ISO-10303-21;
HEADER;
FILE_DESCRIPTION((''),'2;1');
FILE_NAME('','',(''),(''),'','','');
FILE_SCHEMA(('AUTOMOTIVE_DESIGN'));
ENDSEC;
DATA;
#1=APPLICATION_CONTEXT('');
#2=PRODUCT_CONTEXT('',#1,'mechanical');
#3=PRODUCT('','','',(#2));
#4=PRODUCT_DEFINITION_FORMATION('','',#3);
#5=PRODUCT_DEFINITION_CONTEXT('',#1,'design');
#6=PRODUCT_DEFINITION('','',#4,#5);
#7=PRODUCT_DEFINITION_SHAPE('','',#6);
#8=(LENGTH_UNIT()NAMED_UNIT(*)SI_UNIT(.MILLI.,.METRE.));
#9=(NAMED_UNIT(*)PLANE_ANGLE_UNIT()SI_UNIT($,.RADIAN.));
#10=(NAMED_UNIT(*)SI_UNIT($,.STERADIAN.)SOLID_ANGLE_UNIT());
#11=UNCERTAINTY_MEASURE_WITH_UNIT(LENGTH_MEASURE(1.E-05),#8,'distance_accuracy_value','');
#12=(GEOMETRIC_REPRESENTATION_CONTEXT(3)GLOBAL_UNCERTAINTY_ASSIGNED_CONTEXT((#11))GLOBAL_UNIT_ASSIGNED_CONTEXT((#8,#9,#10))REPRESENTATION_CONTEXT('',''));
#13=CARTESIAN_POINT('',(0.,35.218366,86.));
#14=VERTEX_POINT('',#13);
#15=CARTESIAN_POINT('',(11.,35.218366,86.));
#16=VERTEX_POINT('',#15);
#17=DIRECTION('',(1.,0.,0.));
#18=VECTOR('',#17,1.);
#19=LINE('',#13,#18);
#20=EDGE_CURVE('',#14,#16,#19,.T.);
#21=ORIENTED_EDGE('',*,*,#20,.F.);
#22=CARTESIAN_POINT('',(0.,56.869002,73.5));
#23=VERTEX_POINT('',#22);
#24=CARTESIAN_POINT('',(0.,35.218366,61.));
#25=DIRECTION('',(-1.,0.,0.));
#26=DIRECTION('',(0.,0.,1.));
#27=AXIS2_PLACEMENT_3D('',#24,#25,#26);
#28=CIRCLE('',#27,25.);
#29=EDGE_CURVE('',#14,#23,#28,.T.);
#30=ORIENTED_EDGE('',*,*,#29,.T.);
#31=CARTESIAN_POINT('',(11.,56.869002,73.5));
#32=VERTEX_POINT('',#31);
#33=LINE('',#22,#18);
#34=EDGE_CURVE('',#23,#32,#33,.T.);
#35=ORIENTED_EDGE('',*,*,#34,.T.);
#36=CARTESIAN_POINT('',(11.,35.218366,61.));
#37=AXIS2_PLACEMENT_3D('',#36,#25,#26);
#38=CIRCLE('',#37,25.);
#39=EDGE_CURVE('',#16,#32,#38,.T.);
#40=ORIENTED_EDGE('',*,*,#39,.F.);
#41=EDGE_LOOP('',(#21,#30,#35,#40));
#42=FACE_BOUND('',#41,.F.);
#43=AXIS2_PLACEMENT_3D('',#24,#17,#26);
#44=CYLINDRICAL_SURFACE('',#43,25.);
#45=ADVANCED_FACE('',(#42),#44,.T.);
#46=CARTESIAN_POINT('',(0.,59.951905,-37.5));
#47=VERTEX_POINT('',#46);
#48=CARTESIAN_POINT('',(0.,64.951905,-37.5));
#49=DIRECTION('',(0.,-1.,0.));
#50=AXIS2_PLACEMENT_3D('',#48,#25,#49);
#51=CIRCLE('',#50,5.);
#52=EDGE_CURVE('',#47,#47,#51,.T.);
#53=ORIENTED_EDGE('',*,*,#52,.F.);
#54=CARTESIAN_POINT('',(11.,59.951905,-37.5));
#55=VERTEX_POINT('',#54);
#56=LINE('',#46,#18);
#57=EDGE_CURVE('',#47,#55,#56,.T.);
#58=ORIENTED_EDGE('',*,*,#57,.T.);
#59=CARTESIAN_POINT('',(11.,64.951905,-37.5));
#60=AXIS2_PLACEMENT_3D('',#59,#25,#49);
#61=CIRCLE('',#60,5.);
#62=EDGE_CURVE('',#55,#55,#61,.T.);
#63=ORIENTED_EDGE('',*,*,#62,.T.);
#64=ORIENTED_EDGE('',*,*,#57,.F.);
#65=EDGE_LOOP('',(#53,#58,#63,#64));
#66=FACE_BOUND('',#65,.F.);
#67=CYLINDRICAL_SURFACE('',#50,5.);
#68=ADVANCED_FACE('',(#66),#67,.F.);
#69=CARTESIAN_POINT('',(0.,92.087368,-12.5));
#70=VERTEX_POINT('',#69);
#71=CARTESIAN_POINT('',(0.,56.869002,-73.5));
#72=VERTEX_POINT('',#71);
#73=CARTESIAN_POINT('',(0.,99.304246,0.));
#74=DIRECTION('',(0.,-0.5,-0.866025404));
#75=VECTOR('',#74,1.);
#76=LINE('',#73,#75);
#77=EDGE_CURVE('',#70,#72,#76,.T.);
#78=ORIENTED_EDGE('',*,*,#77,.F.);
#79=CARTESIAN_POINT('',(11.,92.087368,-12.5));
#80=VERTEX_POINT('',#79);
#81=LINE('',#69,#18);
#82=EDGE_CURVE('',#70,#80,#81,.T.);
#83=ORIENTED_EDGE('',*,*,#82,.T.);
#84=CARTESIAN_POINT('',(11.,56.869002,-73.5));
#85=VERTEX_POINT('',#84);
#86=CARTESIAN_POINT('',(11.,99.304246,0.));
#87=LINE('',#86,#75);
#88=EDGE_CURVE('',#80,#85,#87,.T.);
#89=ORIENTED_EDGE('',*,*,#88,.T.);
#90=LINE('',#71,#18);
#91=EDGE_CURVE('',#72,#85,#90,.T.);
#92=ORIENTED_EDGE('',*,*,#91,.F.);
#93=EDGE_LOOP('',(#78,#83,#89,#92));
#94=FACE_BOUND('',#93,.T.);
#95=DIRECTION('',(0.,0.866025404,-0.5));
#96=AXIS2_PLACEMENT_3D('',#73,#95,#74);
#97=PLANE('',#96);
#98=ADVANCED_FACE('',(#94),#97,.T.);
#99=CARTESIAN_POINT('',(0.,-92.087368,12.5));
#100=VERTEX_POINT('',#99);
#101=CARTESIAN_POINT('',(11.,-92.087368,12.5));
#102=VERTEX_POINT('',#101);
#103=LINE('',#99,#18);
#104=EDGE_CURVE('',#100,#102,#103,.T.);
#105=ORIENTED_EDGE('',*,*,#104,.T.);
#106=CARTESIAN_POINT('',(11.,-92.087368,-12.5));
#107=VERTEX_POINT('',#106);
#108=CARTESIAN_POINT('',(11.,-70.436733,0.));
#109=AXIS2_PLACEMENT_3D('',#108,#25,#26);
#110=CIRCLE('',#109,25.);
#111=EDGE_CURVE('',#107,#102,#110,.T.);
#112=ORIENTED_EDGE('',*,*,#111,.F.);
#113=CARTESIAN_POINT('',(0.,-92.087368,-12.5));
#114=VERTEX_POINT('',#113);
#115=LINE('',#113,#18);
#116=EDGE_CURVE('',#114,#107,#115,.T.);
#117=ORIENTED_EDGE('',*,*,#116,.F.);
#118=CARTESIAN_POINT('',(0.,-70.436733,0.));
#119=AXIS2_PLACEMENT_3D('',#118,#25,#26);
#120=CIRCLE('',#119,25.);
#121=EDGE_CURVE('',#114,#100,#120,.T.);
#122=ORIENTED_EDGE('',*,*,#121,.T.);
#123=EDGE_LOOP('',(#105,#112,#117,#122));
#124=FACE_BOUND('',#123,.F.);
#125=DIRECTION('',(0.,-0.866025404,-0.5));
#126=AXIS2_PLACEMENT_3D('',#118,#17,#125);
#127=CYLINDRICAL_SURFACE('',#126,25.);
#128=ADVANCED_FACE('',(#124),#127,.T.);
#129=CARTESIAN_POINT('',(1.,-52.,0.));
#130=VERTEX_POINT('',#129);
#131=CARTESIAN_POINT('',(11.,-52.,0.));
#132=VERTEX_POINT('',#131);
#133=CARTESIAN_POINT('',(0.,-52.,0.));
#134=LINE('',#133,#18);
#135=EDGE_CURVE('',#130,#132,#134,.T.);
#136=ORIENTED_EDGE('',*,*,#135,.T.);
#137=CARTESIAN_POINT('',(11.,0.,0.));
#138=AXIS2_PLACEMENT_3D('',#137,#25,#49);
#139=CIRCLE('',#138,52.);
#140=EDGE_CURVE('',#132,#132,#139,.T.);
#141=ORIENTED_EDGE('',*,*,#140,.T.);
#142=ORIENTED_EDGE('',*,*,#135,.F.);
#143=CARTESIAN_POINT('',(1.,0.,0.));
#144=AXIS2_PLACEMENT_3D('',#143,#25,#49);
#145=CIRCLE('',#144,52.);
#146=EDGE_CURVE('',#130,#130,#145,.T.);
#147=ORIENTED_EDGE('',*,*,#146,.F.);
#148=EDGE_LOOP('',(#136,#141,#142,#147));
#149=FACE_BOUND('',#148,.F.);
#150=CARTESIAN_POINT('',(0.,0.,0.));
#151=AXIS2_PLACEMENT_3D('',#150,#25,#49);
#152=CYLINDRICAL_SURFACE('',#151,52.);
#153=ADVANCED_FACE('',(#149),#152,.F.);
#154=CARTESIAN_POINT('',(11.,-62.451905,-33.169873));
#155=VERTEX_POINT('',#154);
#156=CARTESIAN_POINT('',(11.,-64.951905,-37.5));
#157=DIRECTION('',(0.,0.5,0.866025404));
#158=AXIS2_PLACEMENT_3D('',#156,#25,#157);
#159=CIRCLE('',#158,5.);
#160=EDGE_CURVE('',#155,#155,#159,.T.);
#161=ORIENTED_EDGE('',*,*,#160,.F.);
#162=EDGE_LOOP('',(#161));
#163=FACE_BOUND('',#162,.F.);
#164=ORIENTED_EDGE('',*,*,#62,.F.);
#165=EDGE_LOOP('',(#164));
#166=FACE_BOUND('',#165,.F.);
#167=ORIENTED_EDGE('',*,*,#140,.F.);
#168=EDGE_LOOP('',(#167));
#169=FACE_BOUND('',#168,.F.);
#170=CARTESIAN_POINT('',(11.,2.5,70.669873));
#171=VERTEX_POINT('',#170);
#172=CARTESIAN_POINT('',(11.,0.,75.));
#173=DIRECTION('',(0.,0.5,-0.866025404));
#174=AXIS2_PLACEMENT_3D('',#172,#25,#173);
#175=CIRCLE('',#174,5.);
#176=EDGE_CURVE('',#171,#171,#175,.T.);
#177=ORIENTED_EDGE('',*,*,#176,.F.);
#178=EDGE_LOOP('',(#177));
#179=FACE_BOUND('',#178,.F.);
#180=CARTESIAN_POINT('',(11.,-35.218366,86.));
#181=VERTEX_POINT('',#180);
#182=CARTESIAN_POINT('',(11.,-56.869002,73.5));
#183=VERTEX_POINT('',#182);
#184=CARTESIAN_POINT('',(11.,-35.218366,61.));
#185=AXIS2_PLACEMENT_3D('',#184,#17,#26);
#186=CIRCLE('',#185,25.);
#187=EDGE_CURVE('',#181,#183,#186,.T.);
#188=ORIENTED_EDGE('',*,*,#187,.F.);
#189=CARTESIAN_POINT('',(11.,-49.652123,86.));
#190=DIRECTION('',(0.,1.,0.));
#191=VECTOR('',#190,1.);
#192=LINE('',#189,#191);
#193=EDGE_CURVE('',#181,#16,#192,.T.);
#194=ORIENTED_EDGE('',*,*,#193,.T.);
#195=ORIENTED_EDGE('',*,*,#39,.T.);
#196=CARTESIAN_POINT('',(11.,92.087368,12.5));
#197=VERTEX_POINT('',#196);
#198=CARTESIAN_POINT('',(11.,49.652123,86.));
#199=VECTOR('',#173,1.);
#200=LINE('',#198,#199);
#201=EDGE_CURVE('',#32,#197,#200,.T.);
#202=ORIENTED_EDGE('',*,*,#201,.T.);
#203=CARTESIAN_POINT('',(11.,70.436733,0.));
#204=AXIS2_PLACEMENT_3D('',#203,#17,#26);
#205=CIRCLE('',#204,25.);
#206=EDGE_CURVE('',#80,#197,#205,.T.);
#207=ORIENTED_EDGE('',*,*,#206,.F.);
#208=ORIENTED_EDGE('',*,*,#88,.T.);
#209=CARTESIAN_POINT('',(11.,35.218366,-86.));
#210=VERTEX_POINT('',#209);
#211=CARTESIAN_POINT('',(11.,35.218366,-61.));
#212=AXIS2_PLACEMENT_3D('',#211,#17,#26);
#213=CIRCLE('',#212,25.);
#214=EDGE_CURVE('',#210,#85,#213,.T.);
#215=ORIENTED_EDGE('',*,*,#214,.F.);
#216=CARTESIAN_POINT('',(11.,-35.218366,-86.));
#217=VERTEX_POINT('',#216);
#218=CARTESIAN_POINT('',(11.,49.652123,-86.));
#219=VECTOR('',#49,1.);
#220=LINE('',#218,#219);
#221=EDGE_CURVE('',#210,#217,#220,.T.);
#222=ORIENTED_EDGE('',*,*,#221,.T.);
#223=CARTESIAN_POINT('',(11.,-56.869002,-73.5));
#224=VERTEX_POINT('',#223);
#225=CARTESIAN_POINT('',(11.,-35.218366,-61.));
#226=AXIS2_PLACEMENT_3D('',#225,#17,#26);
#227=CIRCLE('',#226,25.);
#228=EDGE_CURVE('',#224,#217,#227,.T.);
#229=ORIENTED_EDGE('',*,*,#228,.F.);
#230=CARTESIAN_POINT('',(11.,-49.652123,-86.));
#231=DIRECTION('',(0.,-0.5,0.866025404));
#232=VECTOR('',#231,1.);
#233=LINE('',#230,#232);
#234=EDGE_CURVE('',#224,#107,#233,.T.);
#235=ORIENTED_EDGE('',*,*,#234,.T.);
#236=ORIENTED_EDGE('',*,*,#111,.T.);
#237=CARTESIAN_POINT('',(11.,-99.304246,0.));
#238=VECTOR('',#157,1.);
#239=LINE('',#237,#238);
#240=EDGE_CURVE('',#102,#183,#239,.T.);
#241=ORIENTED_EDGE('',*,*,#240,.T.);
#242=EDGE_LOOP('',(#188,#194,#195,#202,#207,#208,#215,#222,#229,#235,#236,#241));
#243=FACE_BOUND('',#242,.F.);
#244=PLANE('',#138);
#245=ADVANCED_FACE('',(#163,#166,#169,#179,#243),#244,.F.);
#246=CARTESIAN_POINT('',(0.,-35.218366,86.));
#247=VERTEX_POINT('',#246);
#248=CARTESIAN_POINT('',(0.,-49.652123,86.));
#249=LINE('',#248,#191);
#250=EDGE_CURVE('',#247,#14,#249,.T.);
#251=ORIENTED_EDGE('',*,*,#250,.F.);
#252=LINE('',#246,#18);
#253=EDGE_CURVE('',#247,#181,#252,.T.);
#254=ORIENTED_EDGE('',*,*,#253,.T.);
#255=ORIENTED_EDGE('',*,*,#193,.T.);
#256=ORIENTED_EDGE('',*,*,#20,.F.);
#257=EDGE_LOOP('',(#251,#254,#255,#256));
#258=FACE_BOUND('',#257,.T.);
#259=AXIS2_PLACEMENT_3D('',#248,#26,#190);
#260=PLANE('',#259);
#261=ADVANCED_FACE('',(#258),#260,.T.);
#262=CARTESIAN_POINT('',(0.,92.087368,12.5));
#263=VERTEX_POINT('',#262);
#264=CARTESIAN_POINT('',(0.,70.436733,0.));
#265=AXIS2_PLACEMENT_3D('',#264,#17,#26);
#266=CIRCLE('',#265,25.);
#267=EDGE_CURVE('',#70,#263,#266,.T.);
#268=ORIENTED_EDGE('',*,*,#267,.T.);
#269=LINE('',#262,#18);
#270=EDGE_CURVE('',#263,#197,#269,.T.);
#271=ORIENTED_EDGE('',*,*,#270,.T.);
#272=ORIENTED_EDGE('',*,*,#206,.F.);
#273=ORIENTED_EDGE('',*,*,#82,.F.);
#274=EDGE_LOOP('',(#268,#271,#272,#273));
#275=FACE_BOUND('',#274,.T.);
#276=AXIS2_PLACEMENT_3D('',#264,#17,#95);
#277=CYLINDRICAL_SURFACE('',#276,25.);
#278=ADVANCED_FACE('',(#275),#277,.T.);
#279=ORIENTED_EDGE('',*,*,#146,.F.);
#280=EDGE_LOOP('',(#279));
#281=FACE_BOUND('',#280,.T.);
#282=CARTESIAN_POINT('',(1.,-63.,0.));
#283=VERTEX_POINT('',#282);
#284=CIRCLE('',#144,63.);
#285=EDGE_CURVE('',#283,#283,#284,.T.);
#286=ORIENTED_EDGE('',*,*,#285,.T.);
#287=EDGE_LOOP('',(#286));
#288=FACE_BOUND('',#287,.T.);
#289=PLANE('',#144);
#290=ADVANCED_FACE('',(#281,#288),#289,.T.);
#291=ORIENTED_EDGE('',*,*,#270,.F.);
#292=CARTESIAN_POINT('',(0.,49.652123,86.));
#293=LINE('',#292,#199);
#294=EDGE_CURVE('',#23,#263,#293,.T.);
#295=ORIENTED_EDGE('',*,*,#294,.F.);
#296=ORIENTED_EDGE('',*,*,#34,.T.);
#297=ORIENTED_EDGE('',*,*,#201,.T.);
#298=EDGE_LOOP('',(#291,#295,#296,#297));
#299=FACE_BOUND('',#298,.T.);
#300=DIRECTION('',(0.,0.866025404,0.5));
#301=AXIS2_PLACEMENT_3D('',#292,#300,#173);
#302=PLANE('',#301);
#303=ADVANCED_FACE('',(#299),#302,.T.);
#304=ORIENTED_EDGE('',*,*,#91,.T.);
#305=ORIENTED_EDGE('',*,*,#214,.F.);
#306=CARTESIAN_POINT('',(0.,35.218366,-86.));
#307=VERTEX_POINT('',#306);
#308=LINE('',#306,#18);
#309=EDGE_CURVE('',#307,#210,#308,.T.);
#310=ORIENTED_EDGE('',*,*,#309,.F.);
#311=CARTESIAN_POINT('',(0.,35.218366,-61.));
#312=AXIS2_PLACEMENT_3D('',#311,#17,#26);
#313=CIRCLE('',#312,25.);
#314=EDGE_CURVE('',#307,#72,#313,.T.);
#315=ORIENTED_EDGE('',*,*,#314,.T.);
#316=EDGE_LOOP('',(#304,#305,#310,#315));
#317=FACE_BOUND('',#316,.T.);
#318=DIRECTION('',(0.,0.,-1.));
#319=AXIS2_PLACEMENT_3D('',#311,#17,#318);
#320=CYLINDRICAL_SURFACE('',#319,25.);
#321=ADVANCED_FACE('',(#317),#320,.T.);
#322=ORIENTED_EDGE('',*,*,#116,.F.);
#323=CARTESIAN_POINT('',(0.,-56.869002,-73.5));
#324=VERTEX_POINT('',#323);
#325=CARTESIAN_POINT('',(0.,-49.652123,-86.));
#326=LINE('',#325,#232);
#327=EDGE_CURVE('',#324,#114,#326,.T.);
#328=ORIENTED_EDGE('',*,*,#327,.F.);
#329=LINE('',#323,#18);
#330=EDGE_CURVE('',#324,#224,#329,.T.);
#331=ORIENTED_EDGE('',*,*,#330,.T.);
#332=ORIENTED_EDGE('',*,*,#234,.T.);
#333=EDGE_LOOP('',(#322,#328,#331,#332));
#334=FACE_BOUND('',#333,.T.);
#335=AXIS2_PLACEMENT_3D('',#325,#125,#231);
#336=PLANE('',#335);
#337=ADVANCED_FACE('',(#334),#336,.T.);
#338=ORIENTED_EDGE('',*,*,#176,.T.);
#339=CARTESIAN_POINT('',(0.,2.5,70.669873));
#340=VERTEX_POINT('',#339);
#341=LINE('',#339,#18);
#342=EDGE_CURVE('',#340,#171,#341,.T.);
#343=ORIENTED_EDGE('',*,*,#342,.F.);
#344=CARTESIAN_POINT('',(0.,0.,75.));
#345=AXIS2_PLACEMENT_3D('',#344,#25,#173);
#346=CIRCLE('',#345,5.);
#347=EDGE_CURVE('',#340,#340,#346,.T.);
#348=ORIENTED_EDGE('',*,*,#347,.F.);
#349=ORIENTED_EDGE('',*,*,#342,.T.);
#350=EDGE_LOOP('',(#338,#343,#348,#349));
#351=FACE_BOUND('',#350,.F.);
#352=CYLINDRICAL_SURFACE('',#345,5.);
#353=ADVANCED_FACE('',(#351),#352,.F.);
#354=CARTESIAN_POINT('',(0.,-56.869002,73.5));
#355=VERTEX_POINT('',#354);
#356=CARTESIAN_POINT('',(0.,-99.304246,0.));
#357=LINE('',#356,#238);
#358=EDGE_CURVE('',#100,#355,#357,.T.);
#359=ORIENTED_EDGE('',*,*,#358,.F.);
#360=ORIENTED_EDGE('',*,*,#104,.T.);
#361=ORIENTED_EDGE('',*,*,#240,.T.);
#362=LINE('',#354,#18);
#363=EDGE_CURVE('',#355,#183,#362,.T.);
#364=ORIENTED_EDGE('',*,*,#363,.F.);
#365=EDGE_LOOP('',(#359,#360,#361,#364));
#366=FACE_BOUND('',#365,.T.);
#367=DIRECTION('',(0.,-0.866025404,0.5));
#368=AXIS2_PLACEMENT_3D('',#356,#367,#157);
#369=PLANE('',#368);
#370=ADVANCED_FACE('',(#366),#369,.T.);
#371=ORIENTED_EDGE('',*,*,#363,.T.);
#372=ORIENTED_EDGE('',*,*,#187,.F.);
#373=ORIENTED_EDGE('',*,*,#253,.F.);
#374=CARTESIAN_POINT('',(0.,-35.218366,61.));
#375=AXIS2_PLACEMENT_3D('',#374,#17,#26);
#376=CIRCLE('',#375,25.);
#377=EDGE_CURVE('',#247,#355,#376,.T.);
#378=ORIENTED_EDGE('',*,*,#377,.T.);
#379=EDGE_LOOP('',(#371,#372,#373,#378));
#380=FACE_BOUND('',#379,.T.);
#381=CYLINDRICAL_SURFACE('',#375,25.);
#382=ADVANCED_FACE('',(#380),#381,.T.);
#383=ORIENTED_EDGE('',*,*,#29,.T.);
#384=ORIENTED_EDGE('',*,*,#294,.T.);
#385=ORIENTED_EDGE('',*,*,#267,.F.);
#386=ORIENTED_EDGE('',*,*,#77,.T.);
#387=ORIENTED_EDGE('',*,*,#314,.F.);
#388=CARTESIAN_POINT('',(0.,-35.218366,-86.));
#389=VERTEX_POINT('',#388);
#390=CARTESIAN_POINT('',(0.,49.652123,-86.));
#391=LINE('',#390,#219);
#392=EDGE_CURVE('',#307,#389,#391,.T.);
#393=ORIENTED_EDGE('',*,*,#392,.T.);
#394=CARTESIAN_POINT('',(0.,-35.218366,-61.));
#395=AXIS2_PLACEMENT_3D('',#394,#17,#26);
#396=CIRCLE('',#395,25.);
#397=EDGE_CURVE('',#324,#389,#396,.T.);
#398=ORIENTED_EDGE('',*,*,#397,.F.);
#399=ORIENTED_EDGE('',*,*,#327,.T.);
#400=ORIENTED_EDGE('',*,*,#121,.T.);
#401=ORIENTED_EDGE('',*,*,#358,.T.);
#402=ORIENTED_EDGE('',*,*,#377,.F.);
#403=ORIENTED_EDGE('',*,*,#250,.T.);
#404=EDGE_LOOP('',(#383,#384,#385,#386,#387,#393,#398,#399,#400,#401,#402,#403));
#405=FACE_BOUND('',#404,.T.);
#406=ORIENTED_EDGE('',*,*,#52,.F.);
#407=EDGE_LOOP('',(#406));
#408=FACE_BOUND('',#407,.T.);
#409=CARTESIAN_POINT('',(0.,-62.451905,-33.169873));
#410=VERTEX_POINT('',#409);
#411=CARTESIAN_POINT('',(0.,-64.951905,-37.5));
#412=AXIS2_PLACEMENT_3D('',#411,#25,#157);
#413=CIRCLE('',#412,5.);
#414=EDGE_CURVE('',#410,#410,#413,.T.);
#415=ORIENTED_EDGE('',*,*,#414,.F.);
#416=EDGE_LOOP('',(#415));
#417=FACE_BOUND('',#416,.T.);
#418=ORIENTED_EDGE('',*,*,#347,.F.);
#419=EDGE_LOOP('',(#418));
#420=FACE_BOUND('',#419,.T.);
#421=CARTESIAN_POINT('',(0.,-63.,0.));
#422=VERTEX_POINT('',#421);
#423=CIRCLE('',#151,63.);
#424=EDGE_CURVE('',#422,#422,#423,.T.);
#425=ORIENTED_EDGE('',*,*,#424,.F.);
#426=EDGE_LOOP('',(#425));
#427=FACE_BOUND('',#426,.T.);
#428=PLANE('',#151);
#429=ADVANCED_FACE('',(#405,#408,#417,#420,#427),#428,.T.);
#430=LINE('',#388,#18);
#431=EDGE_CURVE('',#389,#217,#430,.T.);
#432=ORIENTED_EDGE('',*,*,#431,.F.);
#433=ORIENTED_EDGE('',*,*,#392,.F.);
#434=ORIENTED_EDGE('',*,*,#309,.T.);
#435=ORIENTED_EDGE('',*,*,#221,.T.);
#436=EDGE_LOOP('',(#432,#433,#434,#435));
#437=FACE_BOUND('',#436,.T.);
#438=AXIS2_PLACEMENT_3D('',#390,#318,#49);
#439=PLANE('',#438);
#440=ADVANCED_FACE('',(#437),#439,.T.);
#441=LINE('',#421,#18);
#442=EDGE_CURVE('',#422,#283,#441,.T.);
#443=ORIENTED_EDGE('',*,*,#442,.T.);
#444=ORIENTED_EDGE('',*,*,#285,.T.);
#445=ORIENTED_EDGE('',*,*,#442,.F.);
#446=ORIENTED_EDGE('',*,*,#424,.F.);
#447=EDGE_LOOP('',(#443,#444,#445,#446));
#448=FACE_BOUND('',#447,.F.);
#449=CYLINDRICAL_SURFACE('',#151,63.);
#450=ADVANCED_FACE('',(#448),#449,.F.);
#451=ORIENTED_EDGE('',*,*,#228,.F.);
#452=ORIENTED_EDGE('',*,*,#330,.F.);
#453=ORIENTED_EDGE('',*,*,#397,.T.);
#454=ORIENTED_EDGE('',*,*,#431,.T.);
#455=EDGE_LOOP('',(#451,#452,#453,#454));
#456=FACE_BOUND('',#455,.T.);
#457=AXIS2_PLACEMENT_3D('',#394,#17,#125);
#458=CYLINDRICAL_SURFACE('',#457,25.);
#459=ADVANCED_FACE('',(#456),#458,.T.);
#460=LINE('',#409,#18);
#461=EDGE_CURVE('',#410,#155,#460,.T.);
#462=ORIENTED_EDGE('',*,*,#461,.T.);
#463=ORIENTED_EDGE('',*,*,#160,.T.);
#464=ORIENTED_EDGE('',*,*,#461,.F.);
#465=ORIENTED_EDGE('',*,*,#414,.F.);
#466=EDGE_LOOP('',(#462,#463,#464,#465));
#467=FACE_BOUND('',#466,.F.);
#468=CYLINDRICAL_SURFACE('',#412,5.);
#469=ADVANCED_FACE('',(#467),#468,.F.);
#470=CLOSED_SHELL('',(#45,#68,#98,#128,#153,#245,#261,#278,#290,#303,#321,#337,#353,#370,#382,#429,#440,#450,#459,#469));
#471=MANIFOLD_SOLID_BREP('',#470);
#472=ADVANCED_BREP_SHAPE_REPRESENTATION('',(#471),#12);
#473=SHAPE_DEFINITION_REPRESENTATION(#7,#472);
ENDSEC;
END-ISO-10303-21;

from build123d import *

# Parameters (mm, degrees)
F2_R             = 35.25
F3_DEPTH         = 11
F4_R             = 25
F7_R             = 17.5
F8_DEPTH         = 14.001
F9_R             = 5
F10_DEPTH        = 67.001
F10_COPIES_COUNT = 3
F11_R            = 52
F11_R_2          = 17.5
F12_DEPTH        = 67.001
F13_W            = 268.7109410763
F13_H            = 256.3393563032
F13_R            = 5
F13_R_2          = 52
F14_DEPTH        = 40
F15_R            = 63
F15_R_2          = 52
F16_DEPTH        = 1


# Not quite as in the source:
# - a feature of the source that left no trace in its solid (it failed there, or was rolled back) is left out
# - a pattern or mirror of a feature is missing from the dataset's text; its kind, count and spacing are read off the source's solid


with BuildPart() as f1:
    # F0 (on Front) → F1 (revolve)
    with BuildSketch(Plane.XZ):
        Polygon((67, 28.15), (67, 35.25), (0, 35.25), (0, 0), (14, 0), (14, 28.15), align=None)
    revolve(axis=Axis((7, 0, 0), (-1, 0, 0)))

    # F2 (on face) → F3 (join)
    with BuildSketch(Plane(origin=(0, 0, 0), x_dir=(0, -1, 0), z_dir=(-1, 0, 0))):
        Polygon((49.6521231503, 86), (-49.6521231503, 86), (-99.3042463006, 0), (-49.6521231503, -86), (49.6521231503, -86), (99.3042463006, 0), align=None)
        Circle(F2_R, mode=Mode.SUBTRACT)
    extrude(amount=-F3_DEPTH)

    # F4
    f4_edges = [f1.edges().sort_by_distance(p)[0] for p in [
        (5.5, 49.652123, -86),
        (5.5, -49.652123, -86),
        (5.5, -99.304246, 0),
        (5.5, -49.652123, 86),
        (5.5, 99.304246, 0),
        (5.5, 49.652123, 86),
    ]]
    fillet(f4_edges, radius=F4_R)

    # F7 (on face) → F8 (cut, through all)
    with BuildSketch(Plane.YZ.offset(14)):
        Circle(F7_R)
    extrude(amount=-F8_DEPTH, mode=Mode.SUBTRACT)

    # F9 (on face) → F10 (cut, through all)
    with BuildSketch(Plane(origin=(0, 0, 0), x_dir=(0, -1, 0), z_dir=(-1, 0, 0))):
        with Locations((-64.9519052838, -37.5)):
            Circle(F9_R)
    f10 = extrude(amount=-F10_DEPTH, mode=Mode.SUBTRACT)

    # F10_copies: F10 ×3 about axis
    f10_copies_axis = Axis((0, 0, 0), (1, 0, 0))
    for i in range(1, F10_COPIES_COUNT):
        add(f10.rotate(f10_copies_axis, i * 360 / F10_COPIES_COUNT), mode=Mode.SUBTRACT)

    # F11 (on face) → F12 (cut, through all)
    with BuildSketch(Plane(origin=(0, 0, 0), x_dir=(0, -1, 0), z_dir=(-1, 0, 0))):
        Circle(F11_R)
        Circle(F11_R_2, mode=Mode.SUBTRACT)
    extrude(amount=-F12_DEPTH, mode=Mode.SUBTRACT)

    # F13 (on face) → F14 (cut)
    with BuildSketch(Plane.YZ.offset(11)):
        with Locations((8.389338851, -8.3738937974)):
            Rectangle(F13_W, F13_H)
        with BuildLine():
            Line((-35.2183664206, 86), (35.2183664206, 86))
            ThreePointArc((35.2183664206, 86), (47.7183664206, 82.6506350946), (56.8690015152, 73.5))
            Line((56.8690015152, 73.5), (92.0873679357, 12.5))
            ThreePointArc((92.0873679357, 12.5), (95.4367328411, 0), (92.0873679357, -12.5))
            Line((92.0873679357, -12.5), (56.8690015152, -73.5))
            ThreePointArc((56.8690015152, -73.5), (47.7183664206, -82.6506350946), (35.2183664206, -86))
            Line((35.2183664206, -86), (-35.2183664206, -86))
            ThreePointArc((-35.2183664206, -86), (-47.7183664206, -82.6506350946), (-56.8690015152, -73.5))
            Line((-56.8690015152, -73.5), (-92.0873679357, -12.5))
            ThreePointArc((-92.0873679357, -12.5), (-95.4367328411, 0), (-92.0873679357, 12.5))
            Line((-92.0873679357, 12.5), (-56.8690015152, 73.5))
            ThreePointArc((-56.8690015152, 73.5), (-47.7183664206, 82.6506350946), (-35.2183664206, 86))
        make_face(mode=Mode.SUBTRACT)
        with BuildLine():
            ThreePointArc((56.8690015152, 73.5), (47.7183664206, 82.6506350946), (35.2183664206, 86))
            Line((35.2183664206, 86), (-35.2183664206, 86))
            ThreePointArc((-35.2183664206, 86), (-47.7183664206, 82.6506350946), (-56.8690015152, 73.5))
            Line((-56.8690015152, 73.5), (-92.0873679357, 12.5))
            ThreePointArc((-92.0873679357, 12.5), (-95.4367328411, 0), (-92.0873679357, -12.5))
            Line((-92.0873679357, -12.5), (-56.8690015152, -73.5))
            ThreePointArc((-56.8690015152, -73.5), (-47.7183664206, -82.6506350946), (-35.2183664206, -86))
            Line((-35.2183664206, -86), (35.2183664206, -86))
            ThreePointArc((35.2183664206, -86), (47.7183664206, -82.6506350946), (56.8690015152, -73.5))
            Line((56.8690015152, -73.5), (92.0873679357, -12.5))
            ThreePointArc((92.0873679357, -12.5), (95.4367328411, 0), (92.0873679357, 12.5))
            Line((92.0873679357, 12.5), (56.8690015152, 73.5))
        make_face()
        with Locations((-64.9519052838, -37.5)):
            Circle(F13_R, mode=Mode.SUBTRACT)
        with Locations((64.9519052838, -37.5)):
            Circle(F13_R, mode=Mode.SUBTRACT)
        Circle(F13_R_2, mode=Mode.SUBTRACT)
        with Locations((0, 75)):
            Circle(F13_R, mode=Mode.SUBTRACT)
    extrude(amount=F14_DEPTH, mode=Mode.SUBTRACT)

    # F15 (on face) → F16 (cut)
    with BuildSketch(Plane(origin=(0, 0, 0), x_dir=(0, -1, 0), z_dir=(-1, 0, 0))):
        Circle(F15_R)
        Circle(F15_R_2, mode=Mode.SUBTRACT)
    extrude(amount=-F16_DEPTH, mode=Mode.SUBTRACT)


solid = f1.part
